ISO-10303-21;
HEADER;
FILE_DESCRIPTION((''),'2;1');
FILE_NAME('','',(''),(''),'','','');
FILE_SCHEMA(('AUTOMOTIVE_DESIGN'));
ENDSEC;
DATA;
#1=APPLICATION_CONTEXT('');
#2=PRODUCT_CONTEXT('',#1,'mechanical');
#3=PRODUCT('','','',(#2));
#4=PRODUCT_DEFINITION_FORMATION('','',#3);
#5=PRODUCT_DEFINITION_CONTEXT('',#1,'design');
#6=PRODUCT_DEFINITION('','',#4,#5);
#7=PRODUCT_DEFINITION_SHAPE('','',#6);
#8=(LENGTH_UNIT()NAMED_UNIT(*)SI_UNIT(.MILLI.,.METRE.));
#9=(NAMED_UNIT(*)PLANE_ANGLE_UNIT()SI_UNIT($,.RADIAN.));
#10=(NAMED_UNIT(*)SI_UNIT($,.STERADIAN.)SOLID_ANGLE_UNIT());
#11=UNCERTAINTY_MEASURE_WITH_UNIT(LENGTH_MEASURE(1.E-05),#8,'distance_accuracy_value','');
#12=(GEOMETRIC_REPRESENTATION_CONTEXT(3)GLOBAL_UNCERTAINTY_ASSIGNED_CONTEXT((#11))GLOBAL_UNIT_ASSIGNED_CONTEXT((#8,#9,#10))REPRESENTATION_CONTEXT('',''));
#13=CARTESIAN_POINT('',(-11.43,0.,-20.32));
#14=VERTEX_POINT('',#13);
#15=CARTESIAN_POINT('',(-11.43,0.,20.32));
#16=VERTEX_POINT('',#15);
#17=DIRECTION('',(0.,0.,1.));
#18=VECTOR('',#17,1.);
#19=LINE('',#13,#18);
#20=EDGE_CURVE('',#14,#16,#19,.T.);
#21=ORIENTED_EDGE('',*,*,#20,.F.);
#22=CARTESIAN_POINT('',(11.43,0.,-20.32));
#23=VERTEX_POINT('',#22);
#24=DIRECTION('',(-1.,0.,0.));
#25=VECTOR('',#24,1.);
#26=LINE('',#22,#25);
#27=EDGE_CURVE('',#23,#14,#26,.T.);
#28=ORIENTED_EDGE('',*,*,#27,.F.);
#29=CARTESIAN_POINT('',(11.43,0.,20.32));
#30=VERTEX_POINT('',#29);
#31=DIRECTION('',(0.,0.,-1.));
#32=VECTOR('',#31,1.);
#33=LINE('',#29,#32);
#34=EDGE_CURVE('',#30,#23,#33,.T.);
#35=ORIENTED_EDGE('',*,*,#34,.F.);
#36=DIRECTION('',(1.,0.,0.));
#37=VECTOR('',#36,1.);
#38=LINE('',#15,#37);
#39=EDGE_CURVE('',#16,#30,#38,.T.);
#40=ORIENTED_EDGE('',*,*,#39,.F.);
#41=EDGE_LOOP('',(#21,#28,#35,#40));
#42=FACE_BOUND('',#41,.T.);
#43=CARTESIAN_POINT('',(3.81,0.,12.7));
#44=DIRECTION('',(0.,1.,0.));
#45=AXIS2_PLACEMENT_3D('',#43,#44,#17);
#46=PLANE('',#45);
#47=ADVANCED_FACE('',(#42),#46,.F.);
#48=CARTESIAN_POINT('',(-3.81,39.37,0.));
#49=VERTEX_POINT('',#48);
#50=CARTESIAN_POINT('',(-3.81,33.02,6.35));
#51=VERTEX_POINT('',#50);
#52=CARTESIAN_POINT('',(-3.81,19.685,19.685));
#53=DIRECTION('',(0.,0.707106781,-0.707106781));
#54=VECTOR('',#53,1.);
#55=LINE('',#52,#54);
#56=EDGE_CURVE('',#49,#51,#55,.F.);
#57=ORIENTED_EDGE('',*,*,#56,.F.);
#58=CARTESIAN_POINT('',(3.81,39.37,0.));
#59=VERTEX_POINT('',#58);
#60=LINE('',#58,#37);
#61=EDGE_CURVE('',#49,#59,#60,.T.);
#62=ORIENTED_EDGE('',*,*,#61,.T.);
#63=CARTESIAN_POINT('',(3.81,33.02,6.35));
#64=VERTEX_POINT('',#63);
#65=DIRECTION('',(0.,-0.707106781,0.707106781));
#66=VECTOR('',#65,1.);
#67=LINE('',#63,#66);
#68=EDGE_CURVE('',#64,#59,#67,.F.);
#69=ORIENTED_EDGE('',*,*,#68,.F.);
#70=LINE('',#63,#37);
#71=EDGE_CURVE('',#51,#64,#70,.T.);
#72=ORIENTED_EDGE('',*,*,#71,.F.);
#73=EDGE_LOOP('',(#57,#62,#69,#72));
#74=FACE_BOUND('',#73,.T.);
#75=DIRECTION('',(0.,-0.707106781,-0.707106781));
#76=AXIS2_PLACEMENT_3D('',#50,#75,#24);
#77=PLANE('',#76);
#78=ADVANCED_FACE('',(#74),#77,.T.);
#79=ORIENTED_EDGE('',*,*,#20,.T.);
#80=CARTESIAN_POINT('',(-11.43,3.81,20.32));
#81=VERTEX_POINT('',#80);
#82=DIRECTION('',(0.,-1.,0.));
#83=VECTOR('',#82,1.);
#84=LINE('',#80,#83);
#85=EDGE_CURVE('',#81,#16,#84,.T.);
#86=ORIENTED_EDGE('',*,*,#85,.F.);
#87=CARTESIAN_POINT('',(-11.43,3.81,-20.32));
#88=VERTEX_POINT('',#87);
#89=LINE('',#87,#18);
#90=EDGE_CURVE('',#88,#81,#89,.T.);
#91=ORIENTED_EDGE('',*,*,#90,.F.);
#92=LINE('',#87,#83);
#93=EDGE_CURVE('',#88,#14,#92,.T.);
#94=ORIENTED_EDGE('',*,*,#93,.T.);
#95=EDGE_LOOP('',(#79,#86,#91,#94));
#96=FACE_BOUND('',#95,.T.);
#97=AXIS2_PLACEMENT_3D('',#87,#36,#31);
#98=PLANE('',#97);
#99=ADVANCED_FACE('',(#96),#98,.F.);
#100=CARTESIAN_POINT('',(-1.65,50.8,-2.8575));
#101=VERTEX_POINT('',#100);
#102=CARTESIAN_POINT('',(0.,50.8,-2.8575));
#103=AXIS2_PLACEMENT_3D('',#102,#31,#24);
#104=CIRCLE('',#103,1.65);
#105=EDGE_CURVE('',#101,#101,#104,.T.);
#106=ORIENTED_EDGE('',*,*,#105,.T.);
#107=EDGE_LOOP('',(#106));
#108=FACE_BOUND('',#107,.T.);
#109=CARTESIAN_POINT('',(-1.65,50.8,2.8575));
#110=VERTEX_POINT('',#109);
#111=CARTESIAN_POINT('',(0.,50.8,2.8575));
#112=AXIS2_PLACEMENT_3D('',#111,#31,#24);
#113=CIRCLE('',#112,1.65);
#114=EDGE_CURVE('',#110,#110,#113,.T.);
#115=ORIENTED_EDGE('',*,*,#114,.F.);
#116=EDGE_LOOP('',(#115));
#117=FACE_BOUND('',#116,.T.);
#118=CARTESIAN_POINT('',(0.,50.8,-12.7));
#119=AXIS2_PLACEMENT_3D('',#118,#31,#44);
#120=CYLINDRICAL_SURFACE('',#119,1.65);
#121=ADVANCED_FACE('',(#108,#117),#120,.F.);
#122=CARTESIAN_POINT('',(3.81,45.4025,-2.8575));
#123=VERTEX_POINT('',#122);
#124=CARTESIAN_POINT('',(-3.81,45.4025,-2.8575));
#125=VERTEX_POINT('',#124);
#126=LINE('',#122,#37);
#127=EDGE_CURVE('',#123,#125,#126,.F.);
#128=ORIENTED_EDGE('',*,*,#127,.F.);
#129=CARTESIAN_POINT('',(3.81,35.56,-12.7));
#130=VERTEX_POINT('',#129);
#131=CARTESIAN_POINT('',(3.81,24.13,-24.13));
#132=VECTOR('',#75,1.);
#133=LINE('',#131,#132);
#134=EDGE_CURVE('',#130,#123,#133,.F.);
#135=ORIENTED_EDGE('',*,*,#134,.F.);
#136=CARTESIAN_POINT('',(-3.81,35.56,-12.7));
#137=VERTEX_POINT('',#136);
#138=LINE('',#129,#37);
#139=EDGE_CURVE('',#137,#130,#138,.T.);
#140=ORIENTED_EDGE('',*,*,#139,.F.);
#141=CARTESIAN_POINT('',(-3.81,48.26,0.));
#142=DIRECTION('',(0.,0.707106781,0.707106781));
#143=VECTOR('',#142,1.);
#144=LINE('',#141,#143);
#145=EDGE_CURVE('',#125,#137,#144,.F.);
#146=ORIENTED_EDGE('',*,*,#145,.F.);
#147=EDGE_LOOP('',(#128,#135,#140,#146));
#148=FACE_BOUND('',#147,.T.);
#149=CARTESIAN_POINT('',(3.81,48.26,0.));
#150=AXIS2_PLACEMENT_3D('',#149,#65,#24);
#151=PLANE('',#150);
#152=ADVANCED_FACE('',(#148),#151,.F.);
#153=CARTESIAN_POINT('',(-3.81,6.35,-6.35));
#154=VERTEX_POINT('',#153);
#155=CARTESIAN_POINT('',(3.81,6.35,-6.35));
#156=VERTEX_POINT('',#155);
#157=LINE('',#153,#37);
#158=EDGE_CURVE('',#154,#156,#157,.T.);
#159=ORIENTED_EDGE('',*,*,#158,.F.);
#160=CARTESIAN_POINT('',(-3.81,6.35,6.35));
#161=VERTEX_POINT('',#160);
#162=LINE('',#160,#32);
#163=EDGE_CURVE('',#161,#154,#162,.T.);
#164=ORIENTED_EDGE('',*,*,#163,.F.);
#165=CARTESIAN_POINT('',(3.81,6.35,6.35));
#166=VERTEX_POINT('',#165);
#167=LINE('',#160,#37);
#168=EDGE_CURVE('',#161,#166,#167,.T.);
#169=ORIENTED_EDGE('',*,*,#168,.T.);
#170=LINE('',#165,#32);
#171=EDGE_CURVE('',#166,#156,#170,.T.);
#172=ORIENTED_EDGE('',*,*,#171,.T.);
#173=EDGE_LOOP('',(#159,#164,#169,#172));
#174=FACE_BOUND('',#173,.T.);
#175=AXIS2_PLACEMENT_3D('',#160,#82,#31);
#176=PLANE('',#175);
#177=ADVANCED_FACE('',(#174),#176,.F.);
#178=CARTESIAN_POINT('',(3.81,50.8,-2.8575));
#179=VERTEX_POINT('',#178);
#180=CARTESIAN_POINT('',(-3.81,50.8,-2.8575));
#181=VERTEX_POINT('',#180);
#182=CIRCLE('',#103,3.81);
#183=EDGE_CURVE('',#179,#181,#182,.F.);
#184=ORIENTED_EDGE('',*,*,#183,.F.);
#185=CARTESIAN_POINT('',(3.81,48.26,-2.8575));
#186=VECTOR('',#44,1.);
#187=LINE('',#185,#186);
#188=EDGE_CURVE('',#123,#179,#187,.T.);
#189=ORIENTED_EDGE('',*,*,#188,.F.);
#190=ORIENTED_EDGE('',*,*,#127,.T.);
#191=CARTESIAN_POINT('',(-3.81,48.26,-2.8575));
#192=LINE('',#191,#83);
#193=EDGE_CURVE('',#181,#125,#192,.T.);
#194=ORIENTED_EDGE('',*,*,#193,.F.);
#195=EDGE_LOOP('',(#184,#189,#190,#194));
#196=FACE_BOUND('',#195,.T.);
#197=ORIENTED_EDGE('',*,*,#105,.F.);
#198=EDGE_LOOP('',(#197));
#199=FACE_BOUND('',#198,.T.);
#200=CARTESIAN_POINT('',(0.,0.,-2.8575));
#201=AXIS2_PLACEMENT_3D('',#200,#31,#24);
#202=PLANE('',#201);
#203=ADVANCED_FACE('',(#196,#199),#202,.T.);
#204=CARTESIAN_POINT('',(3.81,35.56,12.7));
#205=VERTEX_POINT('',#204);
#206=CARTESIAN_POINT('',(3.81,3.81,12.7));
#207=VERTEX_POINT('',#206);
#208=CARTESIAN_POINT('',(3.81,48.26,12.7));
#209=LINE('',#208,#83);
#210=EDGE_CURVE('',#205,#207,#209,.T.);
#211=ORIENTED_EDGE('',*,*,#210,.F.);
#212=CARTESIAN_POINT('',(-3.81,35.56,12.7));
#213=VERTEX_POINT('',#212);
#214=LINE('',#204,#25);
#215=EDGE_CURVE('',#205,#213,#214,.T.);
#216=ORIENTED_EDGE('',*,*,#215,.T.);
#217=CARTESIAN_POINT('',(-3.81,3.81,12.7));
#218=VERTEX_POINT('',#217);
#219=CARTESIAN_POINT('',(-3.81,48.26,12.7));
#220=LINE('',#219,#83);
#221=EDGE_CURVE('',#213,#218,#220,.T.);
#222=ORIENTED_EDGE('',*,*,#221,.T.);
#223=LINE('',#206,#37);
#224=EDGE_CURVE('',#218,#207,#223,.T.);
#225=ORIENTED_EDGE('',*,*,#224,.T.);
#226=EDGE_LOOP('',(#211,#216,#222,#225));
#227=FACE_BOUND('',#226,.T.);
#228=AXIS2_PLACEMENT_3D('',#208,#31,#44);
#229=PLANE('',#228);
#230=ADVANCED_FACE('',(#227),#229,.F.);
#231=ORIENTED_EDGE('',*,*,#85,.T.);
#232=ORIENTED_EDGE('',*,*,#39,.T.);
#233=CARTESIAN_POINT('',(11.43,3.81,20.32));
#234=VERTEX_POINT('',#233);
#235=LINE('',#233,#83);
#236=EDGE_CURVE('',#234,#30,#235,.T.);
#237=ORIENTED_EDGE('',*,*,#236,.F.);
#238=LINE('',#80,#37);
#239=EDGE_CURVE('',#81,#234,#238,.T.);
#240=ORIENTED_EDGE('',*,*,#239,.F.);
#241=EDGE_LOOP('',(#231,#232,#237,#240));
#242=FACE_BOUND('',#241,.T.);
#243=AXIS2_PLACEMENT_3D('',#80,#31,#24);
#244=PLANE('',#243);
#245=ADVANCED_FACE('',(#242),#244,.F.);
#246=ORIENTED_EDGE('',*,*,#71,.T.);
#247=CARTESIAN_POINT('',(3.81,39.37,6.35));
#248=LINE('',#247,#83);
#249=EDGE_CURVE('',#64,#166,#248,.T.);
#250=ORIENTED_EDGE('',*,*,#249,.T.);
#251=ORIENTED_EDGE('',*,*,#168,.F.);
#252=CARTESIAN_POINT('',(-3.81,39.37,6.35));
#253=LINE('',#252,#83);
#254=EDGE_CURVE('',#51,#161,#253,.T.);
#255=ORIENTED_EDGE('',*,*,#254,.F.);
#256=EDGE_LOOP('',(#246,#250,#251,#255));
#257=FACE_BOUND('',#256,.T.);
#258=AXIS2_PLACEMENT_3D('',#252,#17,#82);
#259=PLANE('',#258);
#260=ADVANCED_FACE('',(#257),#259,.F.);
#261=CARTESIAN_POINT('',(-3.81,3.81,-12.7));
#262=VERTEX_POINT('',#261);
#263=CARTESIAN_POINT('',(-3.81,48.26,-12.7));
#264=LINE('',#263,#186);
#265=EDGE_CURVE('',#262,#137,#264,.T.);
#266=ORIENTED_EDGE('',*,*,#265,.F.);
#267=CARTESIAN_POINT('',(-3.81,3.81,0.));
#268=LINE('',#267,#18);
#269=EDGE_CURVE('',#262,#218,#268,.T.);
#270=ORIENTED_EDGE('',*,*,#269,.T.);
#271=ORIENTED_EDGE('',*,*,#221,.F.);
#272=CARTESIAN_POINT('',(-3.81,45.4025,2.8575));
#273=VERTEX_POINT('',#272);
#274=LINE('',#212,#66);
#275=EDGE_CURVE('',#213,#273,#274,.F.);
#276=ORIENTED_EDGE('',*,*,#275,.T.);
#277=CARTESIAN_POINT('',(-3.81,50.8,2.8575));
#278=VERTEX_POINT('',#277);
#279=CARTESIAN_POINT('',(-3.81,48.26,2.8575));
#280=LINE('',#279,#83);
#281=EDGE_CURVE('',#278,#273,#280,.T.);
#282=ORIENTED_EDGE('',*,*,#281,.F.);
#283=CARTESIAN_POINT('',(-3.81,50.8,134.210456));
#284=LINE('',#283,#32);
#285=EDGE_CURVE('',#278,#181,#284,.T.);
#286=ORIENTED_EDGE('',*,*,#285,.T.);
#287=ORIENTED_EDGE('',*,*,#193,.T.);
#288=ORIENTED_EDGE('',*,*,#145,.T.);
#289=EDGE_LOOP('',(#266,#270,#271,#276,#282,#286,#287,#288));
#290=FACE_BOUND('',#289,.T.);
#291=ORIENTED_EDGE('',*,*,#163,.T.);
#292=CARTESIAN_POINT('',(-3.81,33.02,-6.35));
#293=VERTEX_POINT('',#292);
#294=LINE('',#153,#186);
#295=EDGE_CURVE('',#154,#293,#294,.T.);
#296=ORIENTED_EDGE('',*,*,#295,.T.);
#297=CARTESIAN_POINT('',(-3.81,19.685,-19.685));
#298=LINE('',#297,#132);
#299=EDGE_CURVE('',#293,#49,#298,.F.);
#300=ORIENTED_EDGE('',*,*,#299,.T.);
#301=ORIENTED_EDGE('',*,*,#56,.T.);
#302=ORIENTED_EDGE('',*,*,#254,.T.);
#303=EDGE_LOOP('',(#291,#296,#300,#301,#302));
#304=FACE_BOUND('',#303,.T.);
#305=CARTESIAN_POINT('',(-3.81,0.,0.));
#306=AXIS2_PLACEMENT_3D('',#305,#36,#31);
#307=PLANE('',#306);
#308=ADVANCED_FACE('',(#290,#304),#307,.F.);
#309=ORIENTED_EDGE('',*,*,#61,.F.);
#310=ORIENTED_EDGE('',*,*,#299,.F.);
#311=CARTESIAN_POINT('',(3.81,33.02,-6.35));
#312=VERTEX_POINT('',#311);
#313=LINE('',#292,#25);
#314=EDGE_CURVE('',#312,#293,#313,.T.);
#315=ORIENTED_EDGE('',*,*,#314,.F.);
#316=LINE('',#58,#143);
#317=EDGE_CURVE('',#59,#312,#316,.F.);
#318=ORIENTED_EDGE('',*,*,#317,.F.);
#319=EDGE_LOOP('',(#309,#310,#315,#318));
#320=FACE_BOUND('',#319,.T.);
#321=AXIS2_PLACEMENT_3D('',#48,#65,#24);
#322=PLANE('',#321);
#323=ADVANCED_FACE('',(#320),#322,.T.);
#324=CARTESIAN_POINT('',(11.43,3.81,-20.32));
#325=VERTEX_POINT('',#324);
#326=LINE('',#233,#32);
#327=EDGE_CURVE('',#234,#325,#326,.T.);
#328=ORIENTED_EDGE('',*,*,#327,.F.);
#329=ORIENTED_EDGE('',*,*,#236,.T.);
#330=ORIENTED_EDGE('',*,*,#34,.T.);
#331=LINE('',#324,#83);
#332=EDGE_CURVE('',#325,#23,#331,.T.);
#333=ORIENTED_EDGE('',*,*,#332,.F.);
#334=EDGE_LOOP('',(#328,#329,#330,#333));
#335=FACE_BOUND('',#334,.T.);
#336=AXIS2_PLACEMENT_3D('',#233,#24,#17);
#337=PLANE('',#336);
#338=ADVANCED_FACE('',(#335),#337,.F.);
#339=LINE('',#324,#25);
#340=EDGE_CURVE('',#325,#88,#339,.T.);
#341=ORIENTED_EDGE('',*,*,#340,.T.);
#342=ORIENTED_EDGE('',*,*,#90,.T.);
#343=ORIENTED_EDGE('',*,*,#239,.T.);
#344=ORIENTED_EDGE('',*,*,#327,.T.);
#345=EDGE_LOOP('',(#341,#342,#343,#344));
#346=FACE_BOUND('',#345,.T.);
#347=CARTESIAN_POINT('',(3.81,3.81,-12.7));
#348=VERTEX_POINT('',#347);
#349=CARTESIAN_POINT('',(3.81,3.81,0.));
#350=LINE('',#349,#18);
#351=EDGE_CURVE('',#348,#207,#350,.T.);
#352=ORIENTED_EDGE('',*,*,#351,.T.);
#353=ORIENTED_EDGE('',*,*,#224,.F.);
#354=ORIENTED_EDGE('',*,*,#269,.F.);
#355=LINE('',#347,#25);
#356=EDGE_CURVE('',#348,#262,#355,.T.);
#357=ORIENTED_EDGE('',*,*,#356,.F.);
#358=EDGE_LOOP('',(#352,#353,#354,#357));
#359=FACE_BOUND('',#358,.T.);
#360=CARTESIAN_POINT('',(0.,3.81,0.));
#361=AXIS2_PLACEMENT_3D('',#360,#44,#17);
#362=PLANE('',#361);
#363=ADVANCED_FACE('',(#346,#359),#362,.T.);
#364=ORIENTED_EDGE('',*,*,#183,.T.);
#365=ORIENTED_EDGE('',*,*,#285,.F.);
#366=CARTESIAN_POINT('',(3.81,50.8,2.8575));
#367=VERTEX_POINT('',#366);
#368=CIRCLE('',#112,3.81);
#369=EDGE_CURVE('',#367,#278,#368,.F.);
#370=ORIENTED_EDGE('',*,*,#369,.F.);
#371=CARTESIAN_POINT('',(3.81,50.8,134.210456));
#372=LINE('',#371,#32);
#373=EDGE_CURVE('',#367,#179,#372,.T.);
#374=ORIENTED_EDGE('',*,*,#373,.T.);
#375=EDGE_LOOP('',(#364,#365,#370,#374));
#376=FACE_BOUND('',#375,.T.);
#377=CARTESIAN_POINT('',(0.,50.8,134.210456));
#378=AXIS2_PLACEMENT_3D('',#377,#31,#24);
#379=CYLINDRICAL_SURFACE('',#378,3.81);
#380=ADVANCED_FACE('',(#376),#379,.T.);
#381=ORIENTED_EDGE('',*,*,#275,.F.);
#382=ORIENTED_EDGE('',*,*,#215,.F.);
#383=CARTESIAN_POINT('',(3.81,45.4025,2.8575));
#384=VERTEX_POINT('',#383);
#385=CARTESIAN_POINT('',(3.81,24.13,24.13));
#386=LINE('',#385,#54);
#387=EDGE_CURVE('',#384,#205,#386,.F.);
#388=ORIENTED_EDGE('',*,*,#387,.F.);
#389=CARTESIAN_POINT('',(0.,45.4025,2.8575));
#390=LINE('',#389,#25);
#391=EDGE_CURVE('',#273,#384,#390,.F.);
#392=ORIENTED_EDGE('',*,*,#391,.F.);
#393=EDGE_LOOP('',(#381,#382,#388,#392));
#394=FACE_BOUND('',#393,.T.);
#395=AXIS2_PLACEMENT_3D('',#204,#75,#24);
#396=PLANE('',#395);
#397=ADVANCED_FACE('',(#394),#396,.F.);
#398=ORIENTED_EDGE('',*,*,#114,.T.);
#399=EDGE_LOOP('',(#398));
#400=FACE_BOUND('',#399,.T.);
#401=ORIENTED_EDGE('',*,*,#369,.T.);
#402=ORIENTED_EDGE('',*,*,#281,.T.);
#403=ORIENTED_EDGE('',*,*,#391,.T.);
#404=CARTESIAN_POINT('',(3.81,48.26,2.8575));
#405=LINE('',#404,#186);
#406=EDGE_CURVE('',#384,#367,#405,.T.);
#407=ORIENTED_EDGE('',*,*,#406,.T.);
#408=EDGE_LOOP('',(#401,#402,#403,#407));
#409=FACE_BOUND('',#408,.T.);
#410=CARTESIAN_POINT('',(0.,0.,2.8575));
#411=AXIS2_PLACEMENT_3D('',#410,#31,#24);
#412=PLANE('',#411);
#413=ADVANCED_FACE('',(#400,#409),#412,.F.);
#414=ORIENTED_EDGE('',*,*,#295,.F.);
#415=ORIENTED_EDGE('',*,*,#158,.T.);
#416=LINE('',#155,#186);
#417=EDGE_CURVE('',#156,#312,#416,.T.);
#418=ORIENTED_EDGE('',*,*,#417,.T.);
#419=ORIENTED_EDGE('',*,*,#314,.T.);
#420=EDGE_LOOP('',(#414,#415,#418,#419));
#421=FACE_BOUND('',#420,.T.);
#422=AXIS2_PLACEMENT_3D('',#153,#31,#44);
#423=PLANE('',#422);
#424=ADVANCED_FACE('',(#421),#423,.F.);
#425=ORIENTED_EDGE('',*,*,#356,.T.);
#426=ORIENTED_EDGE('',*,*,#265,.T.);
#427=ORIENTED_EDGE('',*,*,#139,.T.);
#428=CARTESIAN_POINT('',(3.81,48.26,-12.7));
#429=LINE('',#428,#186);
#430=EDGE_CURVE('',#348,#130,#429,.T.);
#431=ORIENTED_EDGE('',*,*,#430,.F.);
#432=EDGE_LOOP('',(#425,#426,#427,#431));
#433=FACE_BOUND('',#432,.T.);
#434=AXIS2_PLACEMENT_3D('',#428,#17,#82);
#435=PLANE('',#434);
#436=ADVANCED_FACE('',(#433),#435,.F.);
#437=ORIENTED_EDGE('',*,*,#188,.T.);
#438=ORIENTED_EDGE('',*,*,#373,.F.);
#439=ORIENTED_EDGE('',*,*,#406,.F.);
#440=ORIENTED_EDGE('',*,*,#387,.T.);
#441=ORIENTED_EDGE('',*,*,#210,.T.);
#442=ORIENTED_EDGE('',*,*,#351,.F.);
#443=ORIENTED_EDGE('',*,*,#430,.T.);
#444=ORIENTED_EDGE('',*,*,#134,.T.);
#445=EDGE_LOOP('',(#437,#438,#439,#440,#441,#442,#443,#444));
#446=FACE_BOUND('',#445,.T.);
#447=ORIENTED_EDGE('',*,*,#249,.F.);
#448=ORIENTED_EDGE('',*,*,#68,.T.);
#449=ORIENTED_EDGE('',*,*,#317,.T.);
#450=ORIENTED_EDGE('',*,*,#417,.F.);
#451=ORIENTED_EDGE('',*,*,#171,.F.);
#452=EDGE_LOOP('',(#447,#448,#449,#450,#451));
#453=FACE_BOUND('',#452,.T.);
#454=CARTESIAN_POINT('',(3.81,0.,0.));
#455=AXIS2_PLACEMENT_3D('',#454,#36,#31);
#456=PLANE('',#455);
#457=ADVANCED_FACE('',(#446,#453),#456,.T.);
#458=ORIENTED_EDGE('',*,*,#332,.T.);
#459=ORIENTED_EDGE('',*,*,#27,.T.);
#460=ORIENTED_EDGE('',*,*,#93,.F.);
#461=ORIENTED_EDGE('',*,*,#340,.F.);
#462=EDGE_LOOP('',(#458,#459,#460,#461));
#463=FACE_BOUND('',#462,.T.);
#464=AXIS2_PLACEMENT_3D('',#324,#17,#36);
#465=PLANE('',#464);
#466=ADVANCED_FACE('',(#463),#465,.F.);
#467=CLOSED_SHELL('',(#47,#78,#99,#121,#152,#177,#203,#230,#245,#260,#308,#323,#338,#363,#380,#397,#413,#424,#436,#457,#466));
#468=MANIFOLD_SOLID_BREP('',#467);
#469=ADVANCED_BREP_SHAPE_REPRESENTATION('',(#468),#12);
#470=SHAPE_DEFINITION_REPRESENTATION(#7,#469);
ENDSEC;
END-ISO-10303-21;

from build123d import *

# Parameters (mm, degrees)
SKETCH2_W            = 25.4
SKETCH2_H            = 48.26
BOSS_EXTRUDE1_DEPTH  = 3.81
SKETCH5_W            = 12.7
SKETCH5_H            = 33.02
CUT_EXTRUDE2_DEPTH   = 51.481501562
SKETCH4_W            = 22.86
SKETCH4_H            = 40.64
BOSS_EXTRUDE3_DEPTH  = 3.81
CHAMFER1_SIZE        = 6.35
SKETCH9_W            = 7.62
SKETCH9_H            = 6.35
BOSS_EXTRUDE4_DEPTH  = 2.8575
M3_CLEARANCE_HOLE1_D = 3.3
CHAMFER2_SIZE        = 12.7
CUT_EXTRUDE3_START   = -15.5575
CUT_EXTRUDE3_DEPTH   = 5.715


# Read off the part's stored shape, not the designer's step: Cut-Extrude3
# Some blends are built 0.0001 mm under size
with BuildPart() as part:
    # Sketch2 → Boss-Extrude1 (new, symmetric)
    with BuildSketch(Plane(origin=(0, 0, 0), x_dir=(0, 0, -1), z_dir=(1, 0, 0))):
        with Locations((0, 24.13)):
            Rectangle(SKETCH2_W, SKETCH2_H)
    extrude(amount=BOSS_EXTRUDE1_DEPTH, both=True)

    # Sketch5 → Cut-Extrude2 (cut, through all)
    with BuildSketch(Plane(origin=(3.81, 0, 0), x_dir=(0, 0, -1), z_dir=(1, 0, 0))):
        with Locations((0, 22.86)):
            Rectangle(SKETCH5_W, SKETCH5_H)
    extrude(amount=-CUT_EXTRUDE2_DEPTH, mode=Mode.SUBTRACT)

    # Sketch4 → Boss-Extrude3 (add)
    with BuildSketch(Plane(origin=(0, 0, 0), x_dir=(1, 0, 0), z_dir=(0, 1, 0))):
        Rectangle(SKETCH4_W, SKETCH4_H)
    extrude(amount=BOSS_EXTRUDE3_DEPTH)

    # Chamfer1
    chamfer1_edges = [part.edges().sort_by_distance(p)[0] for p in [
        (0, 39.37, 6.35),
        (0, 39.37, -6.35),
    ]]
    chamfer(chamfer1_edges, length=CHAMFER1_SIZE - 0.0001)  # a hair under: the kernel refuses the full size

    # Sketch9 → Boss-Extrude4 (add, symmetric)
    with BuildSketch(Plane.XY):
        with Locations((0, 51.435)):
            Rectangle(SKETCH9_W, SKETCH9_H)
    extrude(amount=BOSS_EXTRUDE4_DEPTH, both=True)

    # M3 Clearance Hole1 (through all)
    with Locations(Plane(origin=(0, 0, -12.7), x_dir=(-1, 0, 0), z_dir=(0, 0, -1))):
        with Locations((0, 50.8)):
            Hole(M3_CLEARANCE_HOLE1_D / 2)

    # Chamfer2
    # the kernel refuses this chamfer: 12.7 mm, written as the material it takes off along each edge
    with BuildSketch(Plane(origin=(36.470373947, 48.26, -12.7), x_dir=(0, -0.9996219169112966, -0.0274958766105866), z_dir=(-1, 0, 0))) as chamfer2_piece_1_section:
        Polygon((CHAMFER2_SIZE * 0.999621916911, CHAMFER2_SIZE * 0.0274958766106), (-CHAMFER2_SIZE * 0.0274958766106, CHAMFER2_SIZE * 0.999621916911), (0, 0), align=None)
    chamfer2_piece_1 = extrude(amount=72.940747894, mode=Mode.PRIVATE)
    chamfer2_piece_1 = split(chamfer2_piece_1, bisect_by=Plane(origin=(0, 43.83103101, -2.8575), z_dir=(0, 0, -1)), keep=Keep.TOP, mode=Mode.PRIVATE)
    add(chamfer2_piece_1, mode=Mode.SUBTRACT)
    with BuildSketch(Plane(origin=(-36.470373947, 48.26, 12.7), x_dir=(0, 0.02749587661058674, -0.9996219169112966), z_dir=(1, 0, 0))) as chamfer2_piece_2_section:
        Polygon((CHAMFER2_SIZE * 0.999621916911, -CHAMFER2_SIZE * 0.0274958766106), (-CHAMFER2_SIZE * 0.0274958766106, -CHAMFER2_SIZE * 0.999621916911), (0, 0), align=None)
    chamfer2_piece_2 = extrude(amount=72.940747894, mode=Mode.PRIVATE)
    chamfer2_piece_2 = split(chamfer2_piece_2, bisect_by=Plane(origin=(0, 43.83103101, 2.8575), z_dir=(0, 0, 1)), keep=Keep.TOP, mode=Mode.PRIVATE)
    add(chamfer2_piece_2, mode=Mode.SUBTRACT)

    # Cut-Extrude3 outline → Cut-Extrude3 (cut)
    with BuildSketch(Plane.XY.offset(12.7).offset(CUT_EXTRUDE3_START)):
        with BuildLine():
            Line((-3.81, 54.61), (-3.81, 50.8))
            ThreePointArc((-3.81, 50.8), (-2.694076836, 53.494076836), (0, 54.61))
            Line((0, 54.61), (-3.81, 54.61))
        make_face()
        with BuildLine():
            Line((3.81, 54.61), (0, 54.61))
            ThreePointArc((0, 54.61), (2.694076836, 53.494076836), (3.81, 50.8))
            Line((3.81, 50.8), (3.81, 54.61))
        make_face()
    extrude(amount=CUT_EXTRUDE3_DEPTH, mode=Mode.SUBTRACT)


solid = part.part
